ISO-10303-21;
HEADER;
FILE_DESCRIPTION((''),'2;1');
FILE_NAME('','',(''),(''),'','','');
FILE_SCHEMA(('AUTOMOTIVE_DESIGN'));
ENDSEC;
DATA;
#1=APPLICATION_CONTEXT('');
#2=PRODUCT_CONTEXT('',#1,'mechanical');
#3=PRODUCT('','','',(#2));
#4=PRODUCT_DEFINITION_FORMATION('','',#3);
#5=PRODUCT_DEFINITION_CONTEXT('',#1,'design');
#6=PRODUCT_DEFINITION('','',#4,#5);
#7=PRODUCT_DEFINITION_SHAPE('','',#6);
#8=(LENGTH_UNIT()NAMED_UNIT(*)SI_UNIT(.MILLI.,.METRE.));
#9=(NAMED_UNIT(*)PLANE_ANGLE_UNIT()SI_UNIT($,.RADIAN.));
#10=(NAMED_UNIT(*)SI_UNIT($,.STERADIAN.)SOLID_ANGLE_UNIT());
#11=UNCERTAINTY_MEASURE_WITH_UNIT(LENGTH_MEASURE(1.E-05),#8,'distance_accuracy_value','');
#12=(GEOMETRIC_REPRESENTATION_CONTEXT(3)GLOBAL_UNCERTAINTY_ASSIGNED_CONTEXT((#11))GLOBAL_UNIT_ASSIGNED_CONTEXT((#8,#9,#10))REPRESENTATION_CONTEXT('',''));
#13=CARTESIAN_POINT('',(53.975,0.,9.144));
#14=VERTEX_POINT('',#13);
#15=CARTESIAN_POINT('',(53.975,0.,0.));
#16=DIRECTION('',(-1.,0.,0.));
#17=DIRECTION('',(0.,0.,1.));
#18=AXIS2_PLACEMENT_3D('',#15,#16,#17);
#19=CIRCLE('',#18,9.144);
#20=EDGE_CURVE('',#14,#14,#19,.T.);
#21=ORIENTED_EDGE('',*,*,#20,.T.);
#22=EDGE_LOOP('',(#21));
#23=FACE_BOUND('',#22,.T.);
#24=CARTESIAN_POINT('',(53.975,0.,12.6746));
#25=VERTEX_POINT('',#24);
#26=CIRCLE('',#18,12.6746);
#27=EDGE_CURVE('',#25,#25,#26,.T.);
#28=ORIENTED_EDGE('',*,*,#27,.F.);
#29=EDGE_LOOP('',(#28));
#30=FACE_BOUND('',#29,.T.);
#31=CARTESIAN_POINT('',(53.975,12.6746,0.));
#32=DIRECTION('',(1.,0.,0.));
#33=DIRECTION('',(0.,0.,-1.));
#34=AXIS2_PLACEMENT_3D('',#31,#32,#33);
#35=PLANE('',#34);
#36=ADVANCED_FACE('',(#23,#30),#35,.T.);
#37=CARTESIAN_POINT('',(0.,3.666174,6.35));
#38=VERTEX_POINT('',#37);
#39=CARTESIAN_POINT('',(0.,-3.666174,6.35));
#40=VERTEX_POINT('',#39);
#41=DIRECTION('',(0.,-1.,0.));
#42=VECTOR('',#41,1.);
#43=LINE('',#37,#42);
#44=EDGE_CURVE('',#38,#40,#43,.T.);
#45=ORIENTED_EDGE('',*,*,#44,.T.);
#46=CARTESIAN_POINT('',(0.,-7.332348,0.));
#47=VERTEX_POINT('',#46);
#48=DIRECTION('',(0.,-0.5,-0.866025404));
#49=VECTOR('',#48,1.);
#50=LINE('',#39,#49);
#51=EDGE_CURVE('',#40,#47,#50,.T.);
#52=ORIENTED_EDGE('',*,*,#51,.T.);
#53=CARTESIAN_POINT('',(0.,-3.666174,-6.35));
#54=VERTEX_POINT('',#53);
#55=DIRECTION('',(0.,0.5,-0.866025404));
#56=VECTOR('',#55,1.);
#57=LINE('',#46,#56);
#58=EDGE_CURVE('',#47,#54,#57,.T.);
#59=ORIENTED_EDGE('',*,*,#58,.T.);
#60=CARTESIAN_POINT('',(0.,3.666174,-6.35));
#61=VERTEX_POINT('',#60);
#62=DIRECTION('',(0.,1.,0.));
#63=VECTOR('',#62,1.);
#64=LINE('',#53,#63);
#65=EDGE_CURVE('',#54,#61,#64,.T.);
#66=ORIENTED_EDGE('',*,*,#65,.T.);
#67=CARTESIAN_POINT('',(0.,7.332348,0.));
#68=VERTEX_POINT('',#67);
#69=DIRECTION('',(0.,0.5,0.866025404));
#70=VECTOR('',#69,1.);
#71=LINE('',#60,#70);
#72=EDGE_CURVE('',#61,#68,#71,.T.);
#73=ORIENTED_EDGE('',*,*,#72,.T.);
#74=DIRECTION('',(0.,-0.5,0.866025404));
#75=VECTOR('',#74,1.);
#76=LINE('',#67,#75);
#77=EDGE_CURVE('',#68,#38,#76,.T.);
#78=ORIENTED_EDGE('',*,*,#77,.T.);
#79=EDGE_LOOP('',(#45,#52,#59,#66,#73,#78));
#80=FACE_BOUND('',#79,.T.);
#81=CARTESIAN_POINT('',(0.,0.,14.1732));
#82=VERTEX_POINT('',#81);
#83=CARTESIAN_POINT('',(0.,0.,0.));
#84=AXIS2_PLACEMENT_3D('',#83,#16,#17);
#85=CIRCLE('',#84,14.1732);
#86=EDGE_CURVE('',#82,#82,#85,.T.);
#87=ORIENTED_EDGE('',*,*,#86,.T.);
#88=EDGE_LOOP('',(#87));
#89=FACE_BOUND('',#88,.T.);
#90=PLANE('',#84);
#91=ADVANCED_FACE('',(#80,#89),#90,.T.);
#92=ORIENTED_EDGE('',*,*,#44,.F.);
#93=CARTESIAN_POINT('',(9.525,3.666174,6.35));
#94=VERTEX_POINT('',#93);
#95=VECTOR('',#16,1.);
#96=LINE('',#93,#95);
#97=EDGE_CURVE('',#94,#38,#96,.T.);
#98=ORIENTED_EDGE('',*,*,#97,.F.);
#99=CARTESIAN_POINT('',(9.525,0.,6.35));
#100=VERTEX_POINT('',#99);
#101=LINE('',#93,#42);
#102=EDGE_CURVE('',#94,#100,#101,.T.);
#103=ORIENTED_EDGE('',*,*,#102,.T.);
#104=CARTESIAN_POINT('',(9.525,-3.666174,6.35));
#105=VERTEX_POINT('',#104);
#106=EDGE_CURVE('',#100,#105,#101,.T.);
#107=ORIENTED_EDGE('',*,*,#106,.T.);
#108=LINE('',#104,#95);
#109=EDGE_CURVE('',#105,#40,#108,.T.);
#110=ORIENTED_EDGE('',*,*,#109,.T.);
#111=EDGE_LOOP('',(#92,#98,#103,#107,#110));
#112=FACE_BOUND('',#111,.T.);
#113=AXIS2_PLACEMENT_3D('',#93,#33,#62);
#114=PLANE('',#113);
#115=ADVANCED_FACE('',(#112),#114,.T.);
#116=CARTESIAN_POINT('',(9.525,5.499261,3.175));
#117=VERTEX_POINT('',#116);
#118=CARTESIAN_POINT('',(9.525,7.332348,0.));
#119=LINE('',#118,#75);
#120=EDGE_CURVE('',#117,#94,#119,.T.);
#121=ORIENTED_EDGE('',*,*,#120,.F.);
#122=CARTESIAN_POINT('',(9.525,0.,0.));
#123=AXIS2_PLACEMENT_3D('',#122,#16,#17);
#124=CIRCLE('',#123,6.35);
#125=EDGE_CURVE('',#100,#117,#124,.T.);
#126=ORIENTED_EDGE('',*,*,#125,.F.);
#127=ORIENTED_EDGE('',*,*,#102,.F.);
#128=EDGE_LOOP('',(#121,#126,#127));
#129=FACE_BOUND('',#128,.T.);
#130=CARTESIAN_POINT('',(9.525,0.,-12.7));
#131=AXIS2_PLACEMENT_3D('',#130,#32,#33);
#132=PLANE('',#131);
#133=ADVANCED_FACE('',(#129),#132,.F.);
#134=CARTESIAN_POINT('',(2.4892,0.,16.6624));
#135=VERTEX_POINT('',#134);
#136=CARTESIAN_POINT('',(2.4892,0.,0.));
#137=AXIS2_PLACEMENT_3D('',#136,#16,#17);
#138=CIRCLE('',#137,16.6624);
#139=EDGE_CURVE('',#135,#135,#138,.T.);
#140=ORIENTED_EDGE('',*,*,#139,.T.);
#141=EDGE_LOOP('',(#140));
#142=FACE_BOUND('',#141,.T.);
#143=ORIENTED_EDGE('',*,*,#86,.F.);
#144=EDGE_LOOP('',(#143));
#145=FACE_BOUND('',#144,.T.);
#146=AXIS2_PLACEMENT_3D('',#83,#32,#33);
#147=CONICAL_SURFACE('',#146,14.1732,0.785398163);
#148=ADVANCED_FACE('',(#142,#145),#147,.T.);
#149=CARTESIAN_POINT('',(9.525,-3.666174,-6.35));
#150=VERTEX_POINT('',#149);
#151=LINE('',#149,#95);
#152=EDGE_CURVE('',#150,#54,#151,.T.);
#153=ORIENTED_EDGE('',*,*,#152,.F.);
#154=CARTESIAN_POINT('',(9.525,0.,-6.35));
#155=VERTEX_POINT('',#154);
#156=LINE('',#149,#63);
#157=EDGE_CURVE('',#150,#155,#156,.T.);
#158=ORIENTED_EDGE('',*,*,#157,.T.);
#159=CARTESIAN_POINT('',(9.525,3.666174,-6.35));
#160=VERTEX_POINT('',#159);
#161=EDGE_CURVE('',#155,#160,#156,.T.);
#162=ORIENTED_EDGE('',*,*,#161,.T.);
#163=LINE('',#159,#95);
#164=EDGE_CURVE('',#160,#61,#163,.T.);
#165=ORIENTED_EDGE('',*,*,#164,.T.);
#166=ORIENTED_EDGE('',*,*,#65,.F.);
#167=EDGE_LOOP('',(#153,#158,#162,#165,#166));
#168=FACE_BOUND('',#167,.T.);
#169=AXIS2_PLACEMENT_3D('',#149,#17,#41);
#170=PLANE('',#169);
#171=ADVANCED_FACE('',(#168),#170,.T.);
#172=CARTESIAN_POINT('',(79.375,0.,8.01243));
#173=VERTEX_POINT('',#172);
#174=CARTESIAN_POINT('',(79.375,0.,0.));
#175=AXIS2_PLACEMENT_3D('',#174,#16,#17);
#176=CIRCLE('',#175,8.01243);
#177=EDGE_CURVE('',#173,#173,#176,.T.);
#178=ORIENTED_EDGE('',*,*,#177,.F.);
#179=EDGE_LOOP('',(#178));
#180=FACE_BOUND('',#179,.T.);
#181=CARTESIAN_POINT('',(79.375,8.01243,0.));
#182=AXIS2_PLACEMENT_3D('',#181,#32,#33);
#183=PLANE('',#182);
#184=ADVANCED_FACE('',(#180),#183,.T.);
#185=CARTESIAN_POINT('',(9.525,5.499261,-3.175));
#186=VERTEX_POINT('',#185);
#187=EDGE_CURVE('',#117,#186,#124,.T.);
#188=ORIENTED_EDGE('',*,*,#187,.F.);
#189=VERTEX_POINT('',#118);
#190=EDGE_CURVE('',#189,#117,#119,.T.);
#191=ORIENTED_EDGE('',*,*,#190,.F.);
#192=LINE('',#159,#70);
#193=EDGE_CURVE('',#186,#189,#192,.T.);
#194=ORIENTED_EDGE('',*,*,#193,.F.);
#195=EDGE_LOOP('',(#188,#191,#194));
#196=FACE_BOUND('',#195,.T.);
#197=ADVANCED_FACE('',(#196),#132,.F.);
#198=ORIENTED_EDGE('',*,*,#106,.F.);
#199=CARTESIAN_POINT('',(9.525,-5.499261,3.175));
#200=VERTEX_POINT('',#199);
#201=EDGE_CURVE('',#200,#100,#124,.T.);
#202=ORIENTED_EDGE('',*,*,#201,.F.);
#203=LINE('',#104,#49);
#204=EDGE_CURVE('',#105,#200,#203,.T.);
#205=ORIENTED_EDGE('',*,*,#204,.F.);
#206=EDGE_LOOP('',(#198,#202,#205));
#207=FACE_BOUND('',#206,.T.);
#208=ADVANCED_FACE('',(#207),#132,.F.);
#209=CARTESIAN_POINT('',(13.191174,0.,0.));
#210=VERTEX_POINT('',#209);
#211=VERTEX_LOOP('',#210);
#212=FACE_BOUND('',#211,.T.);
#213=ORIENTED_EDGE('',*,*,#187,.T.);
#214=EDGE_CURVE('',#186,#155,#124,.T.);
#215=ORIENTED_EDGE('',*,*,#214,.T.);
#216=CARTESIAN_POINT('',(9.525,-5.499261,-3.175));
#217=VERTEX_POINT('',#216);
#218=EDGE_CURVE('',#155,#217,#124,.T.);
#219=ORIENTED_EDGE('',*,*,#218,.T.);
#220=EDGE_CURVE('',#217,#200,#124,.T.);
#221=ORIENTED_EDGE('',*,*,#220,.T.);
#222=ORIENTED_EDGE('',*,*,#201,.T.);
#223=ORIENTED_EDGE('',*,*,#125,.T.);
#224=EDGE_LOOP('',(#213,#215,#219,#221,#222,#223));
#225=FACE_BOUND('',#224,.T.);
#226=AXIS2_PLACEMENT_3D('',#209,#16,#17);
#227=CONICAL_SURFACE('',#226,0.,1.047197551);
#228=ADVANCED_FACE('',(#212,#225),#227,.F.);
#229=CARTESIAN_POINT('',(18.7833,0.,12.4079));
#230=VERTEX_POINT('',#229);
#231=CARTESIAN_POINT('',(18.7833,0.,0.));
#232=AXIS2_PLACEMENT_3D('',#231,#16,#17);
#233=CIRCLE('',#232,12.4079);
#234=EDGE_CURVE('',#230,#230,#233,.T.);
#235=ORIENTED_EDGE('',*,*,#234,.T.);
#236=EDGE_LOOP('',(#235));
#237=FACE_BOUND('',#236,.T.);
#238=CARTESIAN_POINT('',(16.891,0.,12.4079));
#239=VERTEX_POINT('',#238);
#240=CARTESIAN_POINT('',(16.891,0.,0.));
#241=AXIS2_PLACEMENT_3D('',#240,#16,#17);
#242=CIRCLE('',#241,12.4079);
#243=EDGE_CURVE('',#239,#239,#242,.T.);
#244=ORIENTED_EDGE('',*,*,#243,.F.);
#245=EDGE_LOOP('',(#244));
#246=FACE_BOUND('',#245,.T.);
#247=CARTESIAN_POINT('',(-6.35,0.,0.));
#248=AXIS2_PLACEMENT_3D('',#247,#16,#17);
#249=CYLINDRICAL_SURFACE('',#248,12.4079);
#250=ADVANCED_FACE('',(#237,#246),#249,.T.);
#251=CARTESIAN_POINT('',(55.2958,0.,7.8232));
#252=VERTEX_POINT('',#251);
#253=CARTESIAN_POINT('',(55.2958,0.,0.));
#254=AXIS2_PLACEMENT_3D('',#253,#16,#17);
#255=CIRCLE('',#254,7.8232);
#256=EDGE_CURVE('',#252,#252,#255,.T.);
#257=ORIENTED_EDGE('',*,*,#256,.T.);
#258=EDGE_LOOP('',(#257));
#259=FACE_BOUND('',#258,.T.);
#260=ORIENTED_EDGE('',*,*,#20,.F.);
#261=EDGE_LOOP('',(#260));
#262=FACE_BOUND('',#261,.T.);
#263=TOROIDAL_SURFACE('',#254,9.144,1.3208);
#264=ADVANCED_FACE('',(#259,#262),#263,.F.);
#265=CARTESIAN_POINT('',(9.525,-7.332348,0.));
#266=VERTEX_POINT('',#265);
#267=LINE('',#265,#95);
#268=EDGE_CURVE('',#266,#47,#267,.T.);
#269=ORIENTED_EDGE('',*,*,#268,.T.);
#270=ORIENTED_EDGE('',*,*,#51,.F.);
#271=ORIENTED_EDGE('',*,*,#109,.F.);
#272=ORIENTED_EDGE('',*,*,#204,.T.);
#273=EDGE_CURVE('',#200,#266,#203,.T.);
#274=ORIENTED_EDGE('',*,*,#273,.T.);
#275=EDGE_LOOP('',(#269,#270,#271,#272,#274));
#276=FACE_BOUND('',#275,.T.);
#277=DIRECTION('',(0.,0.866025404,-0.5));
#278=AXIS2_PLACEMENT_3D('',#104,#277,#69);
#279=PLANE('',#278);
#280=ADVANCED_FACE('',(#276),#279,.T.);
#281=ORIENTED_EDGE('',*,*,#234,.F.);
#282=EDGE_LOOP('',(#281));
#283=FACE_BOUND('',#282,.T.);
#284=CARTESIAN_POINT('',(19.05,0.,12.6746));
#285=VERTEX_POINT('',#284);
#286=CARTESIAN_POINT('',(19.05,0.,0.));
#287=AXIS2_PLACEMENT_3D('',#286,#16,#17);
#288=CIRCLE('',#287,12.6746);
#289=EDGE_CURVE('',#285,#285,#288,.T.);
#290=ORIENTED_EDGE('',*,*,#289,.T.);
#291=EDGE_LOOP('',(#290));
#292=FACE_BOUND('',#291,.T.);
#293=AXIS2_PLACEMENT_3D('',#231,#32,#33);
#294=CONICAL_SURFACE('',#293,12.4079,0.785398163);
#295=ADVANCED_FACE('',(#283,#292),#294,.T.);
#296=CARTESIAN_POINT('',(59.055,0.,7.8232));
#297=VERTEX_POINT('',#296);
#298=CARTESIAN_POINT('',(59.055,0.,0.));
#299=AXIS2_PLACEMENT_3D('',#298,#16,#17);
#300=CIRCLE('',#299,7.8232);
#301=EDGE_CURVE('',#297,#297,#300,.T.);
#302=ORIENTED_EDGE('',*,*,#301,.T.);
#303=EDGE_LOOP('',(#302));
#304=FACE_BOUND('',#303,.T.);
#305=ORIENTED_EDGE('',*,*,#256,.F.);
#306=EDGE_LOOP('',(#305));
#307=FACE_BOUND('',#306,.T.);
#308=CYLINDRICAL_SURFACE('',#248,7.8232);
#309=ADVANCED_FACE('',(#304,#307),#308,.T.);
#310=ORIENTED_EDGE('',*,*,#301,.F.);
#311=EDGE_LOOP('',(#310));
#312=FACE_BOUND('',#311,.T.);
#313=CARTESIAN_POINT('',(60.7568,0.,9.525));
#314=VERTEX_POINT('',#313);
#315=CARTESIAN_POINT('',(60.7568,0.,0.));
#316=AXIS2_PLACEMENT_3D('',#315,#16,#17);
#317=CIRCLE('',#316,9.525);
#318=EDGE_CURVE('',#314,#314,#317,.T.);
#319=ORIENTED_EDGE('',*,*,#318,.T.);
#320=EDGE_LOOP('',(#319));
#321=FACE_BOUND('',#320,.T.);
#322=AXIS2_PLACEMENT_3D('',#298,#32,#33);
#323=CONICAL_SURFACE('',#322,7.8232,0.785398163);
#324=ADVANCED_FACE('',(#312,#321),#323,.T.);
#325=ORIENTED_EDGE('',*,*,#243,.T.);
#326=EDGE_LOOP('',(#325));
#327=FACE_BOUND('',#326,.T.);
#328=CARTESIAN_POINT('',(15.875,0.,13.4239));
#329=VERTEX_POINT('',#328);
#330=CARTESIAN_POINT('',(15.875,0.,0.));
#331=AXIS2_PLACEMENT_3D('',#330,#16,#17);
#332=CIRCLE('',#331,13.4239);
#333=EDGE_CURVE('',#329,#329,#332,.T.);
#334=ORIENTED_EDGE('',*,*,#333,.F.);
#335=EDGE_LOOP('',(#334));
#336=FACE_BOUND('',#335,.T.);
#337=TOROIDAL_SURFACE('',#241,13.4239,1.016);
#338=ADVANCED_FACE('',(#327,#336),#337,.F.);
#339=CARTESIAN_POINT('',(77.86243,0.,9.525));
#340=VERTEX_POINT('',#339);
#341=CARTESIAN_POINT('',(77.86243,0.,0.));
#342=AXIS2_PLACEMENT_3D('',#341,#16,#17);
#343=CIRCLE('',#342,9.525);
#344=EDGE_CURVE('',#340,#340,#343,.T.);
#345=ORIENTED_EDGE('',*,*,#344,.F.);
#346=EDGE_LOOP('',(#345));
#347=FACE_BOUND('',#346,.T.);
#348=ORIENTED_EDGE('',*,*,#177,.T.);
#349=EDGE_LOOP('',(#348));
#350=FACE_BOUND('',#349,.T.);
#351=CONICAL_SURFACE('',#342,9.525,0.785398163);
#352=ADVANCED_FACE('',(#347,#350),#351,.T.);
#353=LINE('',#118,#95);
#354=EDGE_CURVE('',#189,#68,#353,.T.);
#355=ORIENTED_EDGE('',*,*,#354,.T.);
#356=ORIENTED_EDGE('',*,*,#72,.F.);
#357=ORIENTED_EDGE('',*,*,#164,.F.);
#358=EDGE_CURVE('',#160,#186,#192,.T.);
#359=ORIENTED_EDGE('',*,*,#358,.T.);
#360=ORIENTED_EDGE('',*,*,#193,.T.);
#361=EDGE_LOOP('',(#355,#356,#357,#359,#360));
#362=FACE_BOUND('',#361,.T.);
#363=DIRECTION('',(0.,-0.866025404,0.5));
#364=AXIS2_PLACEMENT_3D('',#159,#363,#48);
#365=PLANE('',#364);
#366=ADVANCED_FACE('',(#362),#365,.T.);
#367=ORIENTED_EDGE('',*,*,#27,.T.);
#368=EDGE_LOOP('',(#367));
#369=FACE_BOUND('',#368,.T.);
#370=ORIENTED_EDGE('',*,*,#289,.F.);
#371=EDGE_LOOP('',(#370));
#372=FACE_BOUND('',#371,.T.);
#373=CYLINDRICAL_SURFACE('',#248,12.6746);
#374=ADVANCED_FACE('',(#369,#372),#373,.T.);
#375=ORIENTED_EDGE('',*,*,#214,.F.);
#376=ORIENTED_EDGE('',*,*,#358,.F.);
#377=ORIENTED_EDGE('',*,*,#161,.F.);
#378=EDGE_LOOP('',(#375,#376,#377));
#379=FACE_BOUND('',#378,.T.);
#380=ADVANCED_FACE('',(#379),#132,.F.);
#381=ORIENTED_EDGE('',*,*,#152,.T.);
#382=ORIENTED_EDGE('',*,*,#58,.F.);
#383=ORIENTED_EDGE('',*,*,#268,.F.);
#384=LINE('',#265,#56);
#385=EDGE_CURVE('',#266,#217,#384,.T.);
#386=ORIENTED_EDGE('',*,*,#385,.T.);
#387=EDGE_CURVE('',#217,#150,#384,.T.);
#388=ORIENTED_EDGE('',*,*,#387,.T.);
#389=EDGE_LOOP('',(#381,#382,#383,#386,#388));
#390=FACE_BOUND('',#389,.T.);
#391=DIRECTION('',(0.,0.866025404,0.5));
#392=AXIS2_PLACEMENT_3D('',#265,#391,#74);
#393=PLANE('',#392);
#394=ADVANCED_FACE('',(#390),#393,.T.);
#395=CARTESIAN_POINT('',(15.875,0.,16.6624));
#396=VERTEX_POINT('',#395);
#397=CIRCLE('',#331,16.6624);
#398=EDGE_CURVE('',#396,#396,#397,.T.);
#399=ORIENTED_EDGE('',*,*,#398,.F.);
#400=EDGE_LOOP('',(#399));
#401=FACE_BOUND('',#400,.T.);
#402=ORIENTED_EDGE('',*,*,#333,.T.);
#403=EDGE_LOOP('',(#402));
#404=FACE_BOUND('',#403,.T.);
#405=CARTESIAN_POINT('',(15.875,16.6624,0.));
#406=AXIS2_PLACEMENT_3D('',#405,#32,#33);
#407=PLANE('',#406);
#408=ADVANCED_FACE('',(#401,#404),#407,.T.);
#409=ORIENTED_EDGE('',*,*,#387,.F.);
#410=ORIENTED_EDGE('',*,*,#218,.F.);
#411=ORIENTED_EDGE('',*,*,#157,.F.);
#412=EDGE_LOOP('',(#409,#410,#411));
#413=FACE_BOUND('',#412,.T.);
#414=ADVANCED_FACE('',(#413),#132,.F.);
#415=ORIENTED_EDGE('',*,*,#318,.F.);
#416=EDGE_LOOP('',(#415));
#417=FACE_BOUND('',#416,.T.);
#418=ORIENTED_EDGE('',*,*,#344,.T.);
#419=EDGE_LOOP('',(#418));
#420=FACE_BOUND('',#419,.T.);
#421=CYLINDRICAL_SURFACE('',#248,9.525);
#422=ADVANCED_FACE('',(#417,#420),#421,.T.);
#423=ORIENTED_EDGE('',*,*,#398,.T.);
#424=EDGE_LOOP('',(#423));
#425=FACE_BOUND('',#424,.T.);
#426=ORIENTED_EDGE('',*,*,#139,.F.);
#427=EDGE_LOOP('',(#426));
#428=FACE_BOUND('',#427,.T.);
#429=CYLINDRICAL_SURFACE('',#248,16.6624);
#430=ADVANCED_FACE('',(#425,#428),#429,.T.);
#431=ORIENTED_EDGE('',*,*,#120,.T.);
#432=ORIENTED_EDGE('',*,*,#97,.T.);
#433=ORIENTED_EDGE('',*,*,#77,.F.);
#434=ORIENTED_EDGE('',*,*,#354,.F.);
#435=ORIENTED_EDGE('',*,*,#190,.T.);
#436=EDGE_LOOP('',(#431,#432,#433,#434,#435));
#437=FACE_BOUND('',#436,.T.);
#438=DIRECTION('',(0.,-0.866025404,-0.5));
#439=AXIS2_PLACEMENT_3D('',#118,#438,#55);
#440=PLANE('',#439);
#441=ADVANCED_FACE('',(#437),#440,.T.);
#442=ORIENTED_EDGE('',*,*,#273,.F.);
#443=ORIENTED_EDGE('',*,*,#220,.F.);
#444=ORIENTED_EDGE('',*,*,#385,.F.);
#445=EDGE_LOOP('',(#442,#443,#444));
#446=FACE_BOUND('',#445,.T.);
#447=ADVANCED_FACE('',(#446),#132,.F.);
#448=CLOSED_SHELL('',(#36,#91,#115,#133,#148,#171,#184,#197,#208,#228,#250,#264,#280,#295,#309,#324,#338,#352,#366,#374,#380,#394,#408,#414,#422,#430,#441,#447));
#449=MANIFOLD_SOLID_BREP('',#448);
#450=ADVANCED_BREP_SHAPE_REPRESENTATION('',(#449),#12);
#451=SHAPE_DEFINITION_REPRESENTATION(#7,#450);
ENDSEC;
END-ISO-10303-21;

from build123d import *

# Parameters (mm, degrees)
HEX_2_DEPTH = 9.525


# Read off the part's stored shape, not the designer's step: ThreadSchematic
with BuildPart() as part:
    # ThreadSchematic outline → ThreadSchematic (revolve)
    with BuildSketch(Plane.YX):
        with BuildLine():
            Line((0, 79.375), (0, 0))
            Line((0, 0), (14.1732, 0))
            Line((14.1732, 0), (16.6624, 2.4892))
            Line((16.6624, 2.4892), (16.6624, 15.875))
            Line((16.6624, 15.875), (13.4239, 15.875))
            ThreePointArc((13.4239, 15.875), (12.70547951, 16.17257951), (12.4079, 16.891))
            Line((12.4079, 16.891), (12.4079, 18.7833))
            Line((12.4079, 18.7833), (12.6746, 19.05))
            Line((12.6746, 19.05), (12.6746, 53.975))
            Line((12.6746, 53.975), (9.144, 53.975))
            ThreePointArc((9.144, 53.975), (8.210053363, 54.361853363), (7.8232, 55.2958))
            Line((7.8232, 55.2958), (7.8232, 59.055))
            Line((7.8232, 59.055), (9.525, 60.7568))
            Line((9.525, 60.7568), (9.525, 77.86243))
            Line((9.525, 77.86243), (8.01243, 79.375))
            Line((8.01243, 79.375), (0, 79.375))
        make_face()
    revolve(axis=Axis((0, 0, 0), (1, 0, 0)))

    # Sketch2 → PreBroach (revolve, cut)
    with BuildSketch(Plane.XY, mode=Mode.PRIVATE) as prebroach_sk:
        Polygon((0, 6.35), (9.525, 6.35), (13.191174209, 0), (0, 0), align=None)
    revolve(prebroach_sk.sketch.rotate(Axis((0, 0, 0), (1, 0, 0)), 90), axis=Axis((0, 0, 0), (1, 0, 0)), mode=Mode.SUBTRACT)

    # Sketch3 → Hex 2 (cut)
    with BuildSketch(Plane.ZY):
        Polygon((-6.35, -3.666174209), (-6.35, 3.666174209), (0, 7.332348419), (6.35, 3.666174209), (6.35, -3.666174209), (0, -7.332348419), align=None)
    extrude(amount=-HEX_2_DEPTH, mode=Mode.SUBTRACT)


solid = part.part
